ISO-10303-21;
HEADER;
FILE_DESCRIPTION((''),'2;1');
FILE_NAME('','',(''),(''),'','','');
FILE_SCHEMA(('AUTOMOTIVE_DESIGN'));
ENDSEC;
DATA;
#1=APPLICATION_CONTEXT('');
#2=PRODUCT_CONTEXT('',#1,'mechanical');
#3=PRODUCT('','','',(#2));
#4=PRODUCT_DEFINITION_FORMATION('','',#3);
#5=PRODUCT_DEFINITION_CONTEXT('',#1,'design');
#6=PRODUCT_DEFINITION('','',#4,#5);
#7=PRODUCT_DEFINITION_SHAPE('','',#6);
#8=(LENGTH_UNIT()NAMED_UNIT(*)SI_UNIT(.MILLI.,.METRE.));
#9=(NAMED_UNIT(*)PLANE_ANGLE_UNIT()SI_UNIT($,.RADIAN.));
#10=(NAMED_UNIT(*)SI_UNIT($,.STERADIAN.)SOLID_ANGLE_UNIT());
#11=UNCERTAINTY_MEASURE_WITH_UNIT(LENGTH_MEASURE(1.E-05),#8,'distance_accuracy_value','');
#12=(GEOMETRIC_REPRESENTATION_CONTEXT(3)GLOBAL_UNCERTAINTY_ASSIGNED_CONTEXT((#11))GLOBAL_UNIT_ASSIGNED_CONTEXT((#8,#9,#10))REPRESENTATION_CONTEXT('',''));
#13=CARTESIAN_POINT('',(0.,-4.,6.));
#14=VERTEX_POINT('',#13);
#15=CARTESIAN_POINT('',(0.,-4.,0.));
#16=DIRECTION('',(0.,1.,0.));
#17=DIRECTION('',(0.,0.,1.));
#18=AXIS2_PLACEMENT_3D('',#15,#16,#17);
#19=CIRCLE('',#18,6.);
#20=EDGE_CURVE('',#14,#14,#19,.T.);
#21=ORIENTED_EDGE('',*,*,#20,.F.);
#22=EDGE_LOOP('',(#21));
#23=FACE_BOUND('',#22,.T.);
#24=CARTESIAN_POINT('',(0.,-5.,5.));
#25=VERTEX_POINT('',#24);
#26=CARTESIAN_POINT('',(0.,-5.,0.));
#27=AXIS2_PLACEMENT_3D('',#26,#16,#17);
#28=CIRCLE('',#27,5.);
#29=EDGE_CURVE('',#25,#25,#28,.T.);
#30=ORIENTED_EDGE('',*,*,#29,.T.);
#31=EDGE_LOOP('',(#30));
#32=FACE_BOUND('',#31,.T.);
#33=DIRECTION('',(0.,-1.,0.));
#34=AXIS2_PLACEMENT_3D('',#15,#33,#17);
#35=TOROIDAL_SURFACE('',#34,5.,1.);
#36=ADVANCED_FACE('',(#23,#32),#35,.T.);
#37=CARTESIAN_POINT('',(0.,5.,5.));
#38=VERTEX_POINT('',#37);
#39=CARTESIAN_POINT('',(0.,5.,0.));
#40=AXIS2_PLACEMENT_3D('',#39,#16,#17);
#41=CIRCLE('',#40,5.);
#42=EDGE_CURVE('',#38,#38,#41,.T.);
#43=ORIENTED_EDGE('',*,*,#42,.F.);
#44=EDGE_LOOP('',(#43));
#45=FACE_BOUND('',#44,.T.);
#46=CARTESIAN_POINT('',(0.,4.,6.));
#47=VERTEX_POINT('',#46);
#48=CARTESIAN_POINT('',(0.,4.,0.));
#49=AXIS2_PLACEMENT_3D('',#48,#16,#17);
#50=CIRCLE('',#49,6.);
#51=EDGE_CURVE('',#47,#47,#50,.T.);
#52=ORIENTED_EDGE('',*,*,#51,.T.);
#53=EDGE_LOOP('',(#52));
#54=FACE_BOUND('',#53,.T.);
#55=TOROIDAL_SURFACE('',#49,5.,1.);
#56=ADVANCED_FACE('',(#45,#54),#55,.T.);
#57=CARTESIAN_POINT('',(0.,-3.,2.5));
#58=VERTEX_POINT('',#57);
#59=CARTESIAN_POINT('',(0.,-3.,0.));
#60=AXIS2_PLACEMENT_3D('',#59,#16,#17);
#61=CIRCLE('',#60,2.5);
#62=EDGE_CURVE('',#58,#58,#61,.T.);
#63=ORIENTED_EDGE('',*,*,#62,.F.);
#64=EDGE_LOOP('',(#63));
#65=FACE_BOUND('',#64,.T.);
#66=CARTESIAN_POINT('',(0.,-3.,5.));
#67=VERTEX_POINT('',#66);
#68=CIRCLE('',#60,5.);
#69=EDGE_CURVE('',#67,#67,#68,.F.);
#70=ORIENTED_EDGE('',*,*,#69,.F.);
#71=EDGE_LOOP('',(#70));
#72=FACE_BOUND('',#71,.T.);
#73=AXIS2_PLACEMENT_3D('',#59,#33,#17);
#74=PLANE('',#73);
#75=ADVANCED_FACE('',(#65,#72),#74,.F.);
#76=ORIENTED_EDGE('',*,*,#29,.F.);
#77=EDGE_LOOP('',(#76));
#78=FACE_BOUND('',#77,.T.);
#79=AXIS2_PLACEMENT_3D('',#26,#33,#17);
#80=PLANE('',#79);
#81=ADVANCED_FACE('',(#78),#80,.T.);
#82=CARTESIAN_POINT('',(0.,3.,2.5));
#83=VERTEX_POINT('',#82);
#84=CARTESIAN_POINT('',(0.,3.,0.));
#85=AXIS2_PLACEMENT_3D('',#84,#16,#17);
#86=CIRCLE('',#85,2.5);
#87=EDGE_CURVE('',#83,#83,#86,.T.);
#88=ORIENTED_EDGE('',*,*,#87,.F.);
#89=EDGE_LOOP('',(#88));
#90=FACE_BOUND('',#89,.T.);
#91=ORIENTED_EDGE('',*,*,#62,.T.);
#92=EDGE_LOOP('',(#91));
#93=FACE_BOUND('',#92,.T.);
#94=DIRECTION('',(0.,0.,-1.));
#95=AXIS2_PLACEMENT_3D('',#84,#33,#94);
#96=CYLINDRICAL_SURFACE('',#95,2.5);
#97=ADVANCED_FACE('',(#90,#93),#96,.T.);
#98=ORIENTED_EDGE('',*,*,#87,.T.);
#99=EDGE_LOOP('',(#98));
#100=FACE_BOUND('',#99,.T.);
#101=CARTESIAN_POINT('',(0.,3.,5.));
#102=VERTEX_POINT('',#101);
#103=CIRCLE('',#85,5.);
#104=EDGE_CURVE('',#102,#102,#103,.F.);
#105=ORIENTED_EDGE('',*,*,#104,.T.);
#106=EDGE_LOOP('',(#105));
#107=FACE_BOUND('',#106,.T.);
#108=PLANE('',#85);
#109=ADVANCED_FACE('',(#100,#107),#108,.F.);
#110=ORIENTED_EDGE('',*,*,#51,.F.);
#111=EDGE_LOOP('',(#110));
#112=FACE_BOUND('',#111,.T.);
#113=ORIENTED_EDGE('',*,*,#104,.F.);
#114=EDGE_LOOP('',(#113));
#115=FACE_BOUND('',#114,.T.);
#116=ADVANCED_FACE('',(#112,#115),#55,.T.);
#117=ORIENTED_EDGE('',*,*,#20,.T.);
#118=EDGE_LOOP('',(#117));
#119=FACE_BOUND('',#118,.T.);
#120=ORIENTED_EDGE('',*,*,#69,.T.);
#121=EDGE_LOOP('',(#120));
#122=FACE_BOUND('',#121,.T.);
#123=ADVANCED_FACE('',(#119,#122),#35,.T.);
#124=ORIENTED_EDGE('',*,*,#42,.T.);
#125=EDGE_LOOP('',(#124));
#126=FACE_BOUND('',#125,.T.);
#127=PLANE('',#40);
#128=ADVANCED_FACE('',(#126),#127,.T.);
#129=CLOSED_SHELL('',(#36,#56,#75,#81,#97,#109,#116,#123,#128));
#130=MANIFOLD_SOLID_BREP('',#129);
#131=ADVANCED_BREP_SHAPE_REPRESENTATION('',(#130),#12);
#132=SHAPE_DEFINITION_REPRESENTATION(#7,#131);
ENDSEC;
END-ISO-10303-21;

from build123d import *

# Parameters (mm, degrees)
SKETCH1_R           = 2.5
BOSS_EXTRUDE1_DEPTH = 3
SKETCH2_R           = 6
BOSS_EXTRUDE2_DEPTH = 2
FILLET1_R           = 1


with BuildPart() as part:
    # Sketch1 → Boss-Extrude1 (new body)
    with BuildSketch(Plane(origin=(0, 0, 0), x_dir=(1, 0, 0), z_dir=(0, 1, 0))):
        with Locations(Location((0, 0, 0), (0, 0, 270))):
            Circle(SKETCH1_R)
    extrude(amount=BOSS_EXTRUDE1_DEPTH)

    # Sketch2 → Boss-Extrude2 (add)
    with BuildSketch(Plane(origin=(0, 3, 0), x_dir=(1, 0, 0), z_dir=(0, 1, 0))):
        with Locations(Location((0, 0, 0), (0, 0, 270))):
            Circle(SKETCH2_R)
    extrude(amount=BOSS_EXTRUDE2_DEPTH)

    # Fillet1
    fillet1_edges = [part.edges().sort_by_distance(p)[0] for p in [
        (0, 3, -6),
        (0, 5, -6),
    ]]
    fillet(fillet1_edges, radius=FILLET1_R - 0.0001)  # a hair under: the kernel refuses the full size

    # Mirror1: part across plane


with BuildPart() as part_1:
    add(part.part)
    add(part.part.mirror(Plane.ZX))


solid = part_1.part
